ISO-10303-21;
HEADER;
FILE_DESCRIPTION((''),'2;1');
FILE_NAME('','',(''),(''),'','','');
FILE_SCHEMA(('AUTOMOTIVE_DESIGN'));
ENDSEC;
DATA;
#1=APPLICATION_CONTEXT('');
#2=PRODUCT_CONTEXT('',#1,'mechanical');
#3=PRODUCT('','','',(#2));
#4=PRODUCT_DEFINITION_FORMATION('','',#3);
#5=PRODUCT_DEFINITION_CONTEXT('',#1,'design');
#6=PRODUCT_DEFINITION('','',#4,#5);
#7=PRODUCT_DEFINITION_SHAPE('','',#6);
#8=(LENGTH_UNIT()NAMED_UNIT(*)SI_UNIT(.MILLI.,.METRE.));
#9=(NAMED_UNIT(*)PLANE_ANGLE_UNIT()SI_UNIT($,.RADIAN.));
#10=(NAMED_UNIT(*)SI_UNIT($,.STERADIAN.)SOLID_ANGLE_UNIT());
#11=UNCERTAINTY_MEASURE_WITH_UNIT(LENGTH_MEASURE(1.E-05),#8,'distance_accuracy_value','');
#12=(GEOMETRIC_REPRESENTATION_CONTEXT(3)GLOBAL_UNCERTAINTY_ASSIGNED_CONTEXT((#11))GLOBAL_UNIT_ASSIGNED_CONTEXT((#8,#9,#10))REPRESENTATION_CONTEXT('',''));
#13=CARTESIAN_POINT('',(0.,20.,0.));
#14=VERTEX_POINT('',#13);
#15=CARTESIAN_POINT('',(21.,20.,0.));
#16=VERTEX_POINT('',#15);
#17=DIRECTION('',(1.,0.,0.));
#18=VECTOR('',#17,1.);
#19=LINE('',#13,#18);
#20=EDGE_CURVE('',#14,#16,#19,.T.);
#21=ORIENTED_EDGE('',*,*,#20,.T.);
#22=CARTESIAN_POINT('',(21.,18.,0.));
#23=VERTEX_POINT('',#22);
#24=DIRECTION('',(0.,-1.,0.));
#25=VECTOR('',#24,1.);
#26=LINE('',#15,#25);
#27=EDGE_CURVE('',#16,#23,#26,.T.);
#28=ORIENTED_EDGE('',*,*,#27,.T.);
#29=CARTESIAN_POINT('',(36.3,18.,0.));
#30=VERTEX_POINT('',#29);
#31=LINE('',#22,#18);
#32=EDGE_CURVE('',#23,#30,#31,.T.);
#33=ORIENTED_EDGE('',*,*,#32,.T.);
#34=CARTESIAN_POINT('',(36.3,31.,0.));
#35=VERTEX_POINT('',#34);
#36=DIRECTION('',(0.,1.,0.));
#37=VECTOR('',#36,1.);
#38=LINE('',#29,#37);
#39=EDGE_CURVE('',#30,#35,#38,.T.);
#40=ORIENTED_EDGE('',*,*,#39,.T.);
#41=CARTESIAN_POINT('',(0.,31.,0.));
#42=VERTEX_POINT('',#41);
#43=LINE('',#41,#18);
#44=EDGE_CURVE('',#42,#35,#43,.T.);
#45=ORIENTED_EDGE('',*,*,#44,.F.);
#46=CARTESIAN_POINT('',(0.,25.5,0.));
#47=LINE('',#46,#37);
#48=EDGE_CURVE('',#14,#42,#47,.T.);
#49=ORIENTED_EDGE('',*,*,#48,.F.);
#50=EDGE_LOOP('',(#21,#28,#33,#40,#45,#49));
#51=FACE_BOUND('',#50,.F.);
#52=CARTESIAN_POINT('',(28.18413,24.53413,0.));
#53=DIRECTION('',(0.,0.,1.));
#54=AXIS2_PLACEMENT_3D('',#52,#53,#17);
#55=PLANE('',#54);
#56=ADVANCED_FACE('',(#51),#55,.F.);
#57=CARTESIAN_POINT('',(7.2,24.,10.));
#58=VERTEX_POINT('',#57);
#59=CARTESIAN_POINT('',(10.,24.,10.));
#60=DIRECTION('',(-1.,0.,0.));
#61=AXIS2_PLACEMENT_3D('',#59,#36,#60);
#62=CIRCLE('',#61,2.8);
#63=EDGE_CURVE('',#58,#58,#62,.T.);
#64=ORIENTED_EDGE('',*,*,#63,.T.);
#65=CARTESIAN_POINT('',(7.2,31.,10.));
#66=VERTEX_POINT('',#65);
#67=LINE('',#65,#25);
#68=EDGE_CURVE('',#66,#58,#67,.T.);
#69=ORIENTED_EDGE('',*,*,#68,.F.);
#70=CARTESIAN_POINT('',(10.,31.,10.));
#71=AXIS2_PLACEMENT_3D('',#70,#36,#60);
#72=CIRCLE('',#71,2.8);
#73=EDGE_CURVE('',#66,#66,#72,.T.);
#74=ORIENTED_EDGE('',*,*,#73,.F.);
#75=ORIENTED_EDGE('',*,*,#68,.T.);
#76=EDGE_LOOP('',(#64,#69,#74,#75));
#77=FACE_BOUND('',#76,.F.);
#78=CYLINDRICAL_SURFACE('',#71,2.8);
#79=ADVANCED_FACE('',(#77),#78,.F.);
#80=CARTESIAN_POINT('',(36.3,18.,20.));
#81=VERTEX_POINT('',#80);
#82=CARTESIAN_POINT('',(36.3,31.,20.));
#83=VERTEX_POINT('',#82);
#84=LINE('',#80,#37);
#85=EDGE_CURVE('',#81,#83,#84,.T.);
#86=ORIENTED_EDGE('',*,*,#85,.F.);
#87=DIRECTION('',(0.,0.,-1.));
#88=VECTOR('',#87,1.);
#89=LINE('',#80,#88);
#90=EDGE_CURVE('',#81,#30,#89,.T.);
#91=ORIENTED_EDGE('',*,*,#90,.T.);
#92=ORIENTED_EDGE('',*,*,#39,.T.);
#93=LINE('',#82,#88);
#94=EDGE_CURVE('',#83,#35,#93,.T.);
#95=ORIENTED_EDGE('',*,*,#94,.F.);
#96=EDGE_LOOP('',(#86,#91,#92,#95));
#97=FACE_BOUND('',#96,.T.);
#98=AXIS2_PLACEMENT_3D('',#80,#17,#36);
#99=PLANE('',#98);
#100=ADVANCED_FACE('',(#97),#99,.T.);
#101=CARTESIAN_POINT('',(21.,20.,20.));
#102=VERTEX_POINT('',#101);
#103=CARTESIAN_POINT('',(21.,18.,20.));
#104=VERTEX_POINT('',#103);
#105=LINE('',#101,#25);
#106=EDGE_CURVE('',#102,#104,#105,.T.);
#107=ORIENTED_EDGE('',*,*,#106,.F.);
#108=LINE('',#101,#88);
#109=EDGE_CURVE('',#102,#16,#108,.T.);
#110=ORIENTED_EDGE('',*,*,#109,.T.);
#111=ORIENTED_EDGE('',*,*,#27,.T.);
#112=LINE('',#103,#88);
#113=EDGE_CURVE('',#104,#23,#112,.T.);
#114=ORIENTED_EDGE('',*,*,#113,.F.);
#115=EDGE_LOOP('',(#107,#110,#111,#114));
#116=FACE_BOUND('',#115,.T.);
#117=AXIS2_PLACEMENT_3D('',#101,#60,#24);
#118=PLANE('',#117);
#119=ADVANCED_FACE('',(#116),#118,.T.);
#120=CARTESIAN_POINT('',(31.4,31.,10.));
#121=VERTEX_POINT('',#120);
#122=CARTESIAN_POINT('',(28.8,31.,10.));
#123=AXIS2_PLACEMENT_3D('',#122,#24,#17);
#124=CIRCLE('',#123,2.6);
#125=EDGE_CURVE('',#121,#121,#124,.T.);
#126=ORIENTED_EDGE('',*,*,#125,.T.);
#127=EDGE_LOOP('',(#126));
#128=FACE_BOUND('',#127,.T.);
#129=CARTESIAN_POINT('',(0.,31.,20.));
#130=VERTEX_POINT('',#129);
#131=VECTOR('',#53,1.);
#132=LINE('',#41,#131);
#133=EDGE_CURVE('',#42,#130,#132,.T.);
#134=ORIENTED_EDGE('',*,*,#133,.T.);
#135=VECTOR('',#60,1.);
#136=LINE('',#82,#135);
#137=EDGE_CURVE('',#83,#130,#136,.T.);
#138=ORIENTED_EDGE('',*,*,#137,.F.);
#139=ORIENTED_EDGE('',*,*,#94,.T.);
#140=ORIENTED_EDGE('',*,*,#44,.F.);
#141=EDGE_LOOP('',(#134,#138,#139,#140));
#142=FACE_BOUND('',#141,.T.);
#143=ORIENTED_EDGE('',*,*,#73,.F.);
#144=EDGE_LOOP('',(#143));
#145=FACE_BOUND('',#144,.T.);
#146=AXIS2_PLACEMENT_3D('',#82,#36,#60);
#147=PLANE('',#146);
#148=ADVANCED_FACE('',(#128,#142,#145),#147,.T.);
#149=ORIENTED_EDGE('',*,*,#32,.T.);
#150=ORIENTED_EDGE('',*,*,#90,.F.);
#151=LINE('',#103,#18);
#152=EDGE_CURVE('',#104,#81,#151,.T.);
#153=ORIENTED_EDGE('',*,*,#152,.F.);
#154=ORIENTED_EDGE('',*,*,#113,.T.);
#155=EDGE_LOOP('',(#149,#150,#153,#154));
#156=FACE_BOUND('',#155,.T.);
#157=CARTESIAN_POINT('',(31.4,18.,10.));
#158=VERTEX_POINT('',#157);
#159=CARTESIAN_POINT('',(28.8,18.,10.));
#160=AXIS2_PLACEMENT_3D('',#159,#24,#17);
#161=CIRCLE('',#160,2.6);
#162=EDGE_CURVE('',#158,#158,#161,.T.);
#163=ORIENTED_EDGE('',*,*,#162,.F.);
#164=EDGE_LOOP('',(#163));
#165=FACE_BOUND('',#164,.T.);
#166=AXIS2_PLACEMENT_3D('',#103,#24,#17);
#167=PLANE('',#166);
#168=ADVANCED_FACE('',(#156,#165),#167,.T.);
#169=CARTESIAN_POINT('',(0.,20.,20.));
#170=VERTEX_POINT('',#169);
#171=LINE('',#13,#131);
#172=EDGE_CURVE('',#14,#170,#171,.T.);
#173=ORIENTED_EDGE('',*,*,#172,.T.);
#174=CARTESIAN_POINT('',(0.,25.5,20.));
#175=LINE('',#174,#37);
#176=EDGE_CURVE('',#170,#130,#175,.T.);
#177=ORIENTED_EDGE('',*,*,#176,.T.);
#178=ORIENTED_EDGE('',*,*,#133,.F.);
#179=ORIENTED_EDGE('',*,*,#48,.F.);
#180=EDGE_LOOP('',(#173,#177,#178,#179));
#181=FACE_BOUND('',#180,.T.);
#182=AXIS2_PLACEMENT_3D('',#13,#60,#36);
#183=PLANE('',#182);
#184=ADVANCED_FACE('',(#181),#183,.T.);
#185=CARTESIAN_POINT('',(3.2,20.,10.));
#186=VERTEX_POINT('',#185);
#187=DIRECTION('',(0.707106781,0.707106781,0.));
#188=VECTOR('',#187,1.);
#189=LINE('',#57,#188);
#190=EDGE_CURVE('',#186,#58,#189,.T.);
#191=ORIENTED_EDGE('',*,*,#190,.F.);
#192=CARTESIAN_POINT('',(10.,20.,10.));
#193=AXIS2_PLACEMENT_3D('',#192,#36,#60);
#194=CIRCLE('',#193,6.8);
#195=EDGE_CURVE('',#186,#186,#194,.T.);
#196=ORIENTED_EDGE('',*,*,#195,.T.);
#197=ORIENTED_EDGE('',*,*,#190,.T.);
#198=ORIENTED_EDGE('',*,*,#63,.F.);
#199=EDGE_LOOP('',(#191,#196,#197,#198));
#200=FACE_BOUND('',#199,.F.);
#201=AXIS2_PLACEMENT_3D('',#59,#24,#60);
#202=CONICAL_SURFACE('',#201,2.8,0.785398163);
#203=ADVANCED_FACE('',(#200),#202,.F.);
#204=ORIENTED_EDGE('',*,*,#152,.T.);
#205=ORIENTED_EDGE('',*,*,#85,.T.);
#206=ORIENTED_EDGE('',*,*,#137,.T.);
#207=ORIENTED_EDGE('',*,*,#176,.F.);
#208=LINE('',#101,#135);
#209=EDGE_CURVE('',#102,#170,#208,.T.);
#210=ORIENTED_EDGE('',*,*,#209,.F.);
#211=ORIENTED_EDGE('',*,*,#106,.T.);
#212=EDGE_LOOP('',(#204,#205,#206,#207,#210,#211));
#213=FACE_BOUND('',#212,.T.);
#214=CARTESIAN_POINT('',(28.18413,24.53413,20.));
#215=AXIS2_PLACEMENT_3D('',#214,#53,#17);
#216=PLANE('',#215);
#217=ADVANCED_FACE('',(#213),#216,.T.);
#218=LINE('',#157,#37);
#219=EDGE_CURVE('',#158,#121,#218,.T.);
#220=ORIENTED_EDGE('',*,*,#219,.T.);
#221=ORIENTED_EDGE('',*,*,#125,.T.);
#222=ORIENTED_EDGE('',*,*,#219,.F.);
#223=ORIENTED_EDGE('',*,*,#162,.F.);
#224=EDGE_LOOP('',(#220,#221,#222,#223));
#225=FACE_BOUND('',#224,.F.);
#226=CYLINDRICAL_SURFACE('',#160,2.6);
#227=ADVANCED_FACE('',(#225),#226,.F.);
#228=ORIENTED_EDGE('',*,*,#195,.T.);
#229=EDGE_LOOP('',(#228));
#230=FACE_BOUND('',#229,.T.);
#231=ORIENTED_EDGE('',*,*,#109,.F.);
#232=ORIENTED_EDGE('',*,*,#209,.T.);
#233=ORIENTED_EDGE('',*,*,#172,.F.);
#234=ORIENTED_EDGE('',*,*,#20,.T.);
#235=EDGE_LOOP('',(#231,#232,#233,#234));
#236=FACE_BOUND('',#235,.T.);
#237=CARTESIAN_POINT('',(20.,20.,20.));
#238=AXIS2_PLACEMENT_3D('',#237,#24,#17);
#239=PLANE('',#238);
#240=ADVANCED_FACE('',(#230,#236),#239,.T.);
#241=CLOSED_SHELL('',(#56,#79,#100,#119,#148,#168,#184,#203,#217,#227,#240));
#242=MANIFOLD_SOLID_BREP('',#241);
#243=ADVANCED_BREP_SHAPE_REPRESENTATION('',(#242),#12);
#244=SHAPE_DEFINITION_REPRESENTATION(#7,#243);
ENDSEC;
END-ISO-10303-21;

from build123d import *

# Parameters (mm, degrees)
F0_W     = 20
F0_H     = 11
F1_DEPTH = 20
F2_R     = 2.8
F3_DEPTH = 25
F5_DEPTH = 20
F6_R     = 2.6
F7_DEPTH = 25
F8_SIZE  = 4


# Not quite as in the source:
# - a feature names something its author has since deleted; it is built from what else it names


with BuildPart() as f1:
    # F0 (on Top) → F1 (new body)
    with BuildSketch(Plane.XY):
        with Locations((10, 25.5)):
            Rectangle(F0_W, F0_H)
    extrude(amount=F1_DEPTH)

    # F2 (on face) → F3 (cut)
    with BuildSketch(Plane(origin=(0, 31, 0), x_dir=(-1, 0, 0), z_dir=(0, 1, 0))):
        with Locations((-10, 10)):
            Circle(F2_R)
    extrude(amount=-F3_DEPTH, mode=Mode.SUBTRACT)

    # F4 (on face) → F5 (join, through all)
    with BuildSketch(Plane.XY.offset(20)):
        Polygon((21, 20), (21, 18), (36.3, 18), (36.3, 31), (20, 31), (20, 20), align=None)
    extrude(amount=-F5_DEPTH)

    # F6 (on face) → F7 (cut)
    with BuildSketch(Plane.XZ.offset(-18)):
        with Locations((28.8, 10)):
            Circle(F6_R)
    extrude(amount=-F7_DEPTH, mode=Mode.SUBTRACT)

    # F8
    f8_edges = [f1.edges().sort_by_distance(p)[0] for p in [
        (12.8, 20, 10),
    ]]
    chamfer(f8_edges, length=F8_SIZE)


solid = f1.part
